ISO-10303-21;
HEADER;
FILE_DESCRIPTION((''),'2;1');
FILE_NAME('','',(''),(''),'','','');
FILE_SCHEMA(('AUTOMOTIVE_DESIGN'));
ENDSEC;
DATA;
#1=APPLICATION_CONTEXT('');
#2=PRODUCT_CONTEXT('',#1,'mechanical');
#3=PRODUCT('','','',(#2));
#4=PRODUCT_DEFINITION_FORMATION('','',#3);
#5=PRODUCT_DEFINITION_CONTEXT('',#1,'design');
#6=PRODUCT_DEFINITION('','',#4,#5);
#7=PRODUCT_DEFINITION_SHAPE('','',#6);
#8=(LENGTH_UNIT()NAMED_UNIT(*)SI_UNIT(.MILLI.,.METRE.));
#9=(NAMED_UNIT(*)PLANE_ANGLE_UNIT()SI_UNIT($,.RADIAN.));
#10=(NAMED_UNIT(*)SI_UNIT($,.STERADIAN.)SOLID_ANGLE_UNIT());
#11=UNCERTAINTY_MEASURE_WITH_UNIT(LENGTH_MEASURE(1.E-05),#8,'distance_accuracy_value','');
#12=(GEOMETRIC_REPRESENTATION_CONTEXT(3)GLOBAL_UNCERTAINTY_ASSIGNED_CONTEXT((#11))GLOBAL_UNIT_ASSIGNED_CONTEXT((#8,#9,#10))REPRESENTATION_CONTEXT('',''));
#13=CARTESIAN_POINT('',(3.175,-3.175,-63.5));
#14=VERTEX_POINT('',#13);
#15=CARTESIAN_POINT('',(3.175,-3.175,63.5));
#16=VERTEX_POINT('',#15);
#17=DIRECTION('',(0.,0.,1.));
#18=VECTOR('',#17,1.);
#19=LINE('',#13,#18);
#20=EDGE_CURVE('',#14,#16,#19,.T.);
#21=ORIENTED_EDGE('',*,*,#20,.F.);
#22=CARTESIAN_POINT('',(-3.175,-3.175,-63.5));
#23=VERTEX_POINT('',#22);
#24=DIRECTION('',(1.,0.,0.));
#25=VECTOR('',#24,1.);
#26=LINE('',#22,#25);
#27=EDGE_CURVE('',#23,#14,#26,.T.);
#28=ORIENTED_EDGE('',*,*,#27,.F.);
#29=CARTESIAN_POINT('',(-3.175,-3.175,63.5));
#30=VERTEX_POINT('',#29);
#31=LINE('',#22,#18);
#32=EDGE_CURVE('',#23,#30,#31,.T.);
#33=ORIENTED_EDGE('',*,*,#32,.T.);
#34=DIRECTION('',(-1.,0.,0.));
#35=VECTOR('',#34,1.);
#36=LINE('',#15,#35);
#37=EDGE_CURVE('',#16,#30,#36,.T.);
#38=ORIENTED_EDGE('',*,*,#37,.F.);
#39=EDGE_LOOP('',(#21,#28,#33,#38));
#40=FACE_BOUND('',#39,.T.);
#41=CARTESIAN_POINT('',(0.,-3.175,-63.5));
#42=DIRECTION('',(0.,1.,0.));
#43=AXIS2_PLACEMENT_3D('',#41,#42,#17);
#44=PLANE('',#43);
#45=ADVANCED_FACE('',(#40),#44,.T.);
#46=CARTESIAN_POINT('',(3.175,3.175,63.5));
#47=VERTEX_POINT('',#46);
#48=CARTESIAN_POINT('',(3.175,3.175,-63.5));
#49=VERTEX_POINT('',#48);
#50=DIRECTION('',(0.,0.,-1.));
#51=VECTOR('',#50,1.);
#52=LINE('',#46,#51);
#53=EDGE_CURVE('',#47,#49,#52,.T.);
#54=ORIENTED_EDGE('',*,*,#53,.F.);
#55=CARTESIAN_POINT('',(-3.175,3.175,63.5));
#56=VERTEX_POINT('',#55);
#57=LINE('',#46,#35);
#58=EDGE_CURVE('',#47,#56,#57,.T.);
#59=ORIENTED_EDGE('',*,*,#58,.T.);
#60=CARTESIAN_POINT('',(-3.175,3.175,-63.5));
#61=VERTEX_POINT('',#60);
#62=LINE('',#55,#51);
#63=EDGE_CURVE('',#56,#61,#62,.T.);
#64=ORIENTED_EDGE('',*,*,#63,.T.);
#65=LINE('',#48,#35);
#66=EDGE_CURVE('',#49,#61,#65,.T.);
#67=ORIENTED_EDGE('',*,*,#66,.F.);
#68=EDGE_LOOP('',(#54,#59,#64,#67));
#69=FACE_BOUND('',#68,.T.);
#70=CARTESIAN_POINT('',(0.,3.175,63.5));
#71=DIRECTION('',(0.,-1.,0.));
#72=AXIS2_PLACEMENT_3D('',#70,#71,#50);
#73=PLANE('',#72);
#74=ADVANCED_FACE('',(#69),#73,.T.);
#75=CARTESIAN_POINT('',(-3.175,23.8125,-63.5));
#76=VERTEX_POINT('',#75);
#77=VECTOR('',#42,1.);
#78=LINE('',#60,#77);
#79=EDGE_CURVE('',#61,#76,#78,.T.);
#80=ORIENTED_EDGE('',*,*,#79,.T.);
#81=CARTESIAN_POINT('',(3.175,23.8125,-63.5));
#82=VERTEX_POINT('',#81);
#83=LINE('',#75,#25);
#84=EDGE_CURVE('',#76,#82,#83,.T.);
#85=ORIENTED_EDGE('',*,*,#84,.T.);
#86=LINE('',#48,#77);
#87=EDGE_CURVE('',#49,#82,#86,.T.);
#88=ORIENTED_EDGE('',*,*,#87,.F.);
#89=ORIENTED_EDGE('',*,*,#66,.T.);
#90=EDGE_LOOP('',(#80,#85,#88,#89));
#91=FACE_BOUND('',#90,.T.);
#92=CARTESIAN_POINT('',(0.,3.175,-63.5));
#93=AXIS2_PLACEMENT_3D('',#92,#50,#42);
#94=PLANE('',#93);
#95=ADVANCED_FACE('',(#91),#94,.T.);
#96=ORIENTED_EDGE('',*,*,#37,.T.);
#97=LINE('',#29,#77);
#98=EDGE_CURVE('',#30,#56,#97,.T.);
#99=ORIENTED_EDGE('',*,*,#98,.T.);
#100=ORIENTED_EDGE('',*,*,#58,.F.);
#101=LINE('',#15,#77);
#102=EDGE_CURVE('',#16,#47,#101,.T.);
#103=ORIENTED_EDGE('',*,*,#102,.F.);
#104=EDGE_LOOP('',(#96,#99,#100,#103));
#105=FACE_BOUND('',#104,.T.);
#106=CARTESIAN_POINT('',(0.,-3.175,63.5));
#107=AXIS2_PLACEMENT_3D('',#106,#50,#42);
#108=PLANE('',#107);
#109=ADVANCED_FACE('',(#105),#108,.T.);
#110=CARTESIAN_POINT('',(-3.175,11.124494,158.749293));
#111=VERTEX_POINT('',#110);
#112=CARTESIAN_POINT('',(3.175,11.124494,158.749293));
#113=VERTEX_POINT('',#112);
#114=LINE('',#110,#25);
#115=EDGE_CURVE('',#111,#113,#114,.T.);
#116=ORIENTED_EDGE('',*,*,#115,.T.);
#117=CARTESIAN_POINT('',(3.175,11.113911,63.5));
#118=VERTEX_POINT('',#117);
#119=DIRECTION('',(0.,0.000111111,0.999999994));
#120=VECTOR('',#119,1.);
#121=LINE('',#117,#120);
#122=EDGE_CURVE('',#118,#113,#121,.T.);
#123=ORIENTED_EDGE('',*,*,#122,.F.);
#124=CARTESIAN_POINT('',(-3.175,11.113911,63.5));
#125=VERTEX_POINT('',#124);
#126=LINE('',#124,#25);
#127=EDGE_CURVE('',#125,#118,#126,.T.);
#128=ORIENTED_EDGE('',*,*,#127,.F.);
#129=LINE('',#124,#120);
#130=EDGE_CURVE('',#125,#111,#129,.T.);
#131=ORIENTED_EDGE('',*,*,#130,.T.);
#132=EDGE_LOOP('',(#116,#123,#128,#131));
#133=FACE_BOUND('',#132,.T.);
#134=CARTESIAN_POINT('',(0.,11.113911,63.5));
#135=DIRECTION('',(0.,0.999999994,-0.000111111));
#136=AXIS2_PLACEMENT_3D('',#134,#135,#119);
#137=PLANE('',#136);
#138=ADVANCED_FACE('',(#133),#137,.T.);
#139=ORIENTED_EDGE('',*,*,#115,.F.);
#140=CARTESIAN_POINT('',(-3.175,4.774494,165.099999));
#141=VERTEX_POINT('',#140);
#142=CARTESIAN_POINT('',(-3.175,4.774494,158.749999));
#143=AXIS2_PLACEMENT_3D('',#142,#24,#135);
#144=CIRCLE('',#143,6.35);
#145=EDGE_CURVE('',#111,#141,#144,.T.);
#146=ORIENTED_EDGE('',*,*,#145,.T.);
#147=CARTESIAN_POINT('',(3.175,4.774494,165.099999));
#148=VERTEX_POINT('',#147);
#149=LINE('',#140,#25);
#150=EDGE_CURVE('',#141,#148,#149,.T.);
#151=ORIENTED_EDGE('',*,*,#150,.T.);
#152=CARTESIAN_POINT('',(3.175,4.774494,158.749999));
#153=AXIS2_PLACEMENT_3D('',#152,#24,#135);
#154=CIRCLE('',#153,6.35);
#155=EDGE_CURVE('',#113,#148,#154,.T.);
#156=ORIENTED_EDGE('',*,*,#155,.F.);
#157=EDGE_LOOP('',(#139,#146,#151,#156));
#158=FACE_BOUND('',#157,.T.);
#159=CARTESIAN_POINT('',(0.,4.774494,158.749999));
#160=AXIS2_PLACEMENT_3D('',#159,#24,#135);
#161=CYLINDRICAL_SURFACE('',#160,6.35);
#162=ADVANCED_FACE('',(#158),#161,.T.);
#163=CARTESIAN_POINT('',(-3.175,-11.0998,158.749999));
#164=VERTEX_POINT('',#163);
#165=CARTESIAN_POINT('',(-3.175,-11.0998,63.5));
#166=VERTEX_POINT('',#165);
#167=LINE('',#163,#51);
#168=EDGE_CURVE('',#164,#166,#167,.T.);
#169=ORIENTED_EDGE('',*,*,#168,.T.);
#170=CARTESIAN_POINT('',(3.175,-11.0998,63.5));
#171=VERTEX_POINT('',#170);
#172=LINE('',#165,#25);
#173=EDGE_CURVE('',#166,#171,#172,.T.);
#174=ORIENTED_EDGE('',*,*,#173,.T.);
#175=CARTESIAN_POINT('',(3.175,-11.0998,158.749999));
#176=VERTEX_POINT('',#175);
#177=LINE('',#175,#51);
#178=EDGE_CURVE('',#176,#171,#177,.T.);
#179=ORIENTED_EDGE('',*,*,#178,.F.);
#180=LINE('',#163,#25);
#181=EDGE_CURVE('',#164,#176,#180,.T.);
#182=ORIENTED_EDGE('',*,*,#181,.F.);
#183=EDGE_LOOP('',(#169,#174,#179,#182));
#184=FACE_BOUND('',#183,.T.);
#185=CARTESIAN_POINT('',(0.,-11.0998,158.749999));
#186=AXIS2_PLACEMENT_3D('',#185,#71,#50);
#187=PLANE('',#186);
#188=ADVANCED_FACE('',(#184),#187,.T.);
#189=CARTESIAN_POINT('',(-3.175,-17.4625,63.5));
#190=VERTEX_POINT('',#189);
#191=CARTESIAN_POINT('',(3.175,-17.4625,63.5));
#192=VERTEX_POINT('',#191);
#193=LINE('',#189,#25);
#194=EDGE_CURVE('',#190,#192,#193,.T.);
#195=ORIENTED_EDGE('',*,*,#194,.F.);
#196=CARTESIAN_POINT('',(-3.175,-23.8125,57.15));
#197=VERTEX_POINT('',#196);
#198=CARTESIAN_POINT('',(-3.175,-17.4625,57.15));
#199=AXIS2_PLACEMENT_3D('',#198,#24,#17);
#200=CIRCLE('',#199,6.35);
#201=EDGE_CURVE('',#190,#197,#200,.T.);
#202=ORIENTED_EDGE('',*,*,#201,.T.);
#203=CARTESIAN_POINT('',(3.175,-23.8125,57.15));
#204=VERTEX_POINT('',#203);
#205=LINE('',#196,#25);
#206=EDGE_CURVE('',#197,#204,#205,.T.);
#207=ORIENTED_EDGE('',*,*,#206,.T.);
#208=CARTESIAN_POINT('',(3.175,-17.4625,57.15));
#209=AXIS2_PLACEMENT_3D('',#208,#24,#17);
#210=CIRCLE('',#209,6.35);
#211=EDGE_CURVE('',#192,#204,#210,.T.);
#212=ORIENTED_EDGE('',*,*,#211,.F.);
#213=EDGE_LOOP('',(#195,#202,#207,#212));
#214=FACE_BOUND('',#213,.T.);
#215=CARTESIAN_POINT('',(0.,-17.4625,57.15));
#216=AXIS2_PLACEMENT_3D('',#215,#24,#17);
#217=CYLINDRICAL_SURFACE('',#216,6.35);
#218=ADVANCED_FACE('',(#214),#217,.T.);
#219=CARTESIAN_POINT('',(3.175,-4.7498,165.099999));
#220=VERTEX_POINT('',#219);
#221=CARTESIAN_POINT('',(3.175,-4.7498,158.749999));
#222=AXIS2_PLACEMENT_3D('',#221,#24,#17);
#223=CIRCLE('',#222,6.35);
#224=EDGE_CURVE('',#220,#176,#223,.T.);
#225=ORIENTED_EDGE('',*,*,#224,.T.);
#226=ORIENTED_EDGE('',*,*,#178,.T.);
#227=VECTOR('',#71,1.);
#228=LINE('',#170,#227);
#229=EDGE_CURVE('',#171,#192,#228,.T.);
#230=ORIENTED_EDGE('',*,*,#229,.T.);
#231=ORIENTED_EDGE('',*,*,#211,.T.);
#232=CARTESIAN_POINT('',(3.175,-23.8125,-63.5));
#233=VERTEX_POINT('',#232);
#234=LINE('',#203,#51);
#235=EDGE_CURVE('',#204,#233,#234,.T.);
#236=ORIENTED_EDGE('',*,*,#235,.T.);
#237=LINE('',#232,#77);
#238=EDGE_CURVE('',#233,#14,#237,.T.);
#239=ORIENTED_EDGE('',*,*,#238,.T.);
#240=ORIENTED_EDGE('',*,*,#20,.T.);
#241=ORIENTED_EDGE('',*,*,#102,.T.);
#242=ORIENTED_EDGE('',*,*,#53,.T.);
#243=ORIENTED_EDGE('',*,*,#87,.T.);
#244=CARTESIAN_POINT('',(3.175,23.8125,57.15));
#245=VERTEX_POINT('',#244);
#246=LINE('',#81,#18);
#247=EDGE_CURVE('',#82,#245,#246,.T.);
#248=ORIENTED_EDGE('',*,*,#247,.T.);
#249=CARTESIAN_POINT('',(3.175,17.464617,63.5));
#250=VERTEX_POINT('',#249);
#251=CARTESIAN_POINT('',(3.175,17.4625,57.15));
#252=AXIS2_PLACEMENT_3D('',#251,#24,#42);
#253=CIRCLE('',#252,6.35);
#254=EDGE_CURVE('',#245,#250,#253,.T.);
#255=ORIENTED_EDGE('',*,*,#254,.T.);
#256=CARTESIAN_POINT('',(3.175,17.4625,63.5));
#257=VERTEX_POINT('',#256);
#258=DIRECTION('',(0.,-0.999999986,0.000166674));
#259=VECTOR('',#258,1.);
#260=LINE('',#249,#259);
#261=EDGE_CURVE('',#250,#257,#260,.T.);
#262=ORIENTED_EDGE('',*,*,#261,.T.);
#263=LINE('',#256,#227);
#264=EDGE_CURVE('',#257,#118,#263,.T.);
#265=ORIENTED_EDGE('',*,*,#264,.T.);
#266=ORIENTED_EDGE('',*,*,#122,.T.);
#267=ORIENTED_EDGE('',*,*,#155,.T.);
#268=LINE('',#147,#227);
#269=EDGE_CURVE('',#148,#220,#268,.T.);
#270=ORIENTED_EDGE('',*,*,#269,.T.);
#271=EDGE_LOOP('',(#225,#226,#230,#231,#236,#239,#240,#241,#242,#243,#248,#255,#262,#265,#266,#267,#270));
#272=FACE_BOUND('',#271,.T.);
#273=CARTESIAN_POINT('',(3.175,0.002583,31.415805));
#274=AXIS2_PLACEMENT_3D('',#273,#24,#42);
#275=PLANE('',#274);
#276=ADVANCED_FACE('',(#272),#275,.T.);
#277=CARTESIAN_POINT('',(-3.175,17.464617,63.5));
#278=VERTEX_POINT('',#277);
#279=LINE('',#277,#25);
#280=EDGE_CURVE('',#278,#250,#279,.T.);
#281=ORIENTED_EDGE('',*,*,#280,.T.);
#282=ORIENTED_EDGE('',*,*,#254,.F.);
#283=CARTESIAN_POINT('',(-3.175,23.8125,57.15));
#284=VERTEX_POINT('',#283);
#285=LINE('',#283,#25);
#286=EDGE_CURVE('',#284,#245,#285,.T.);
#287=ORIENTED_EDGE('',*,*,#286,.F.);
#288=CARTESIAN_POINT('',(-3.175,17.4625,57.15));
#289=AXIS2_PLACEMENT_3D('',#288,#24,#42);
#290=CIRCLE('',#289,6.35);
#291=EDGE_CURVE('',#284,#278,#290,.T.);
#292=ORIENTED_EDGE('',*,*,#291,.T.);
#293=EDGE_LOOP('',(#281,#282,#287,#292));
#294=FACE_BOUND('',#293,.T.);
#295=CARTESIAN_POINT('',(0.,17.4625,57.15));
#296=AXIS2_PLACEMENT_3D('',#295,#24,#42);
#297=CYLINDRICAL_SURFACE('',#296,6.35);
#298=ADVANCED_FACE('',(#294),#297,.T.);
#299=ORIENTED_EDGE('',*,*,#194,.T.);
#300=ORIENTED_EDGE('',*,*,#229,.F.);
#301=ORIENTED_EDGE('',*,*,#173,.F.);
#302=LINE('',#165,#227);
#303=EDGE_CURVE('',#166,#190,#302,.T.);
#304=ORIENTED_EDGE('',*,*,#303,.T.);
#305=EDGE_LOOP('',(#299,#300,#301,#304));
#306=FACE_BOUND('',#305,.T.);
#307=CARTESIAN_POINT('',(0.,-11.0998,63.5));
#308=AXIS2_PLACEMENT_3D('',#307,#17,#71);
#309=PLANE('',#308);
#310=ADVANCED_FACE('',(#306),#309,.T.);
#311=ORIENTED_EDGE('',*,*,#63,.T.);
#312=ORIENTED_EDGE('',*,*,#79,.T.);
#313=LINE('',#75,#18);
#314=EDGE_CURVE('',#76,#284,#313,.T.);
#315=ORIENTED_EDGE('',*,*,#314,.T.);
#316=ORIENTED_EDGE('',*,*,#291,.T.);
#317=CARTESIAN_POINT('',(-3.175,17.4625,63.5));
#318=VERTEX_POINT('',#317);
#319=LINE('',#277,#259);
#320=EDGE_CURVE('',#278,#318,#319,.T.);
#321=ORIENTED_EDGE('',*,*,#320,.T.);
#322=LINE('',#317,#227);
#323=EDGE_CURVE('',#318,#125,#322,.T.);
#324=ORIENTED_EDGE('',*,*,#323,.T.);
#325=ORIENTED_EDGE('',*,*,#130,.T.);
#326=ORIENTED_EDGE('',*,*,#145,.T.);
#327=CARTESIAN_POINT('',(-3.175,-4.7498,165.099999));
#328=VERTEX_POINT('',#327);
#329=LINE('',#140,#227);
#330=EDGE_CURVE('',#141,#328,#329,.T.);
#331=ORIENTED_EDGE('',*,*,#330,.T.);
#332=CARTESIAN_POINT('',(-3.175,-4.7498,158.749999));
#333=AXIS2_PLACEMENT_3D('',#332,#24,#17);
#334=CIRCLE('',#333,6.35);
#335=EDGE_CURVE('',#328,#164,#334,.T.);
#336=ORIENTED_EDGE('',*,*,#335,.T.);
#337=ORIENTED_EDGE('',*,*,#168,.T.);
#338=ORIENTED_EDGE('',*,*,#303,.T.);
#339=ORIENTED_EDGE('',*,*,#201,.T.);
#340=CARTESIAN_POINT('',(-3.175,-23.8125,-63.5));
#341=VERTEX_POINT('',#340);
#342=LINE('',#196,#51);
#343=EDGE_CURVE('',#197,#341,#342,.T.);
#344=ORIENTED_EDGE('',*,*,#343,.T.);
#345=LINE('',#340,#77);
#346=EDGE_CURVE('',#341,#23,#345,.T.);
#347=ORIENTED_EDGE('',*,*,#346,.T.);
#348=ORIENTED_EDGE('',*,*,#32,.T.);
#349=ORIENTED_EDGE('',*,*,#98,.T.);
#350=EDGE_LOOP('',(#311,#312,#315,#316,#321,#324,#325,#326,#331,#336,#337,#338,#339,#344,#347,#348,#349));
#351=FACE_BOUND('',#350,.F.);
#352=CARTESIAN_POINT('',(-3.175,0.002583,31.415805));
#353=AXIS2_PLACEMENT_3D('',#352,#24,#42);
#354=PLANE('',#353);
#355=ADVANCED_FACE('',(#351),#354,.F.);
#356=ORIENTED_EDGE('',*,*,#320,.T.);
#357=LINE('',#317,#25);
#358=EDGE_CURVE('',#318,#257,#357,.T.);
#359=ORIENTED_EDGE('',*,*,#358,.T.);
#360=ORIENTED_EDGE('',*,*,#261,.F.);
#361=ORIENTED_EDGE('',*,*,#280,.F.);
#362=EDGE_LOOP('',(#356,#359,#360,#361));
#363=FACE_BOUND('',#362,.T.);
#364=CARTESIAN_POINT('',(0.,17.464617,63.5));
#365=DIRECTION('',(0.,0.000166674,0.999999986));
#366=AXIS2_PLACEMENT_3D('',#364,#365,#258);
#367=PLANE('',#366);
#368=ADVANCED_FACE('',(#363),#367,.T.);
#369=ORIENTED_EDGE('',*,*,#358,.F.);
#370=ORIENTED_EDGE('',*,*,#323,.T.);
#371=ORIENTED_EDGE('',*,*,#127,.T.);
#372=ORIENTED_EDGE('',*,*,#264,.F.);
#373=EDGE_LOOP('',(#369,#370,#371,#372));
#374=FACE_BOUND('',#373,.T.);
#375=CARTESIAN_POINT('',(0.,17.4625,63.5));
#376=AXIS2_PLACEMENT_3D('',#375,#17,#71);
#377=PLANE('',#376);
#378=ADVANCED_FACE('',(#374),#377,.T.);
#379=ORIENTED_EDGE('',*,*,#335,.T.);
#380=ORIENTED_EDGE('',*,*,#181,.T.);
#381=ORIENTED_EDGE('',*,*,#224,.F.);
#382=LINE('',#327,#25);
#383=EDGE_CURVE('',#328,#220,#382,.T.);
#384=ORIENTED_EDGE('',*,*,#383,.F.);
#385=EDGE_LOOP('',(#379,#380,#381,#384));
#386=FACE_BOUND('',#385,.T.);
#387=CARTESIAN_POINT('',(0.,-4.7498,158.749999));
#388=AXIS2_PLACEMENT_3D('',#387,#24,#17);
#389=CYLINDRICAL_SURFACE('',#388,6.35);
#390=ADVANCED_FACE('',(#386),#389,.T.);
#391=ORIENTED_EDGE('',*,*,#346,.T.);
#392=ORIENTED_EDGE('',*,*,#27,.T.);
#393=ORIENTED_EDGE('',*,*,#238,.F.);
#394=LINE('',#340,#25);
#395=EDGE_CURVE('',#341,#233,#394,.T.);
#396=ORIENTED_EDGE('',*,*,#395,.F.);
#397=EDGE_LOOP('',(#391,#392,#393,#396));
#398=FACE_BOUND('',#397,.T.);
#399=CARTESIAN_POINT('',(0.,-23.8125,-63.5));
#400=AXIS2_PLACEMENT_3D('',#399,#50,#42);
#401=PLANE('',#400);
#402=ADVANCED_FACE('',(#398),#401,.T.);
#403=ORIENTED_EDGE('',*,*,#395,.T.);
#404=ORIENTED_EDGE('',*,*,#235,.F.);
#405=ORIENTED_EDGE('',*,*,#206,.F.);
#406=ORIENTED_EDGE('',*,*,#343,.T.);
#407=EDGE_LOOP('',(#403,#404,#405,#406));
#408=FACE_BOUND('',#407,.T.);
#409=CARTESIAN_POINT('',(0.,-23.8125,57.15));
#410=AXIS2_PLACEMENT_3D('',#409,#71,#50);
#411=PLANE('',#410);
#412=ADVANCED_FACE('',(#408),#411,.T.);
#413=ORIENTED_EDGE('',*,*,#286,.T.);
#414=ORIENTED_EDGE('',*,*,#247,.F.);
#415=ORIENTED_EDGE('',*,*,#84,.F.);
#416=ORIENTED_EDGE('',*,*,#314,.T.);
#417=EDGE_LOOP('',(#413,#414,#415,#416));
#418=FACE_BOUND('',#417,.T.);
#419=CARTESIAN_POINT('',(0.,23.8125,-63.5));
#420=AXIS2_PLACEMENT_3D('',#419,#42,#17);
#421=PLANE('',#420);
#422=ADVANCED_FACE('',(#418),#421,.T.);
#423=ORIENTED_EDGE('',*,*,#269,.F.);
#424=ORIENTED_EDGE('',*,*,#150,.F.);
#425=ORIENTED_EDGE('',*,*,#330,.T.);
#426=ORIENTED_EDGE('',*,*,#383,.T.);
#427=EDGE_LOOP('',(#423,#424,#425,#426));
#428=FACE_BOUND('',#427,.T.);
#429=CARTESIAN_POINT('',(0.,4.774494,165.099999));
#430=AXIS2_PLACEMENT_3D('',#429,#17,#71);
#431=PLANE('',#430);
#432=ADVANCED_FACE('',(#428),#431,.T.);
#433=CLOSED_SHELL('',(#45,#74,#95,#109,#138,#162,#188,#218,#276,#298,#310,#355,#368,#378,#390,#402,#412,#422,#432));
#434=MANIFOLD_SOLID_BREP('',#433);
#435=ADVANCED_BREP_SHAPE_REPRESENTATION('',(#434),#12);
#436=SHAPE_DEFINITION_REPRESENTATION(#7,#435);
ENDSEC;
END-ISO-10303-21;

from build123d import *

# Parameters (mm, degrees)
F1_DEPTH = 3.175


# Not quite as in the source:
# - ends of sketch curves that miss each other by under 0.0002 mm in the source are joined


with BuildPart() as f1:
    # F0 (on Right) → F1 (new body, symmetric)
    with BuildSketch(Plane.YZ):
        with BuildLine():
            Line((3.175, -63.5), (23.8125, -63.5))
            Line((23.8125, -63.5), (23.8125, 57.15))
            ThreePointArc((23.8125, 57.15), (21.9533763667, 61.6393796296), (17.4646167058, 63.4999996472))
            Line((17.4646167058, 63.4999996472), (17.4625, 63.5))
            Line((17.4625, 63.5), (11.1139111112, 63.5))
            Line((11.1139111112, 63.5), (11.124494366, 158.7492930333))
            ThreePointArc((11.124494366, 158.7492930333), (9.2648719104, 163.2398771909), (4.7744944052, 165.0999985889))
            Line((4.7744944052, 165.0999985889), (-4.7498, 165.0999985889))
            ThreePointArc((-4.7498, 165.0999985889), (-9.2399280605, 163.2401266494), (-11.0998, 158.7499985889))
            Line((-11.0998, 158.7499985889), (-11.0998, 63.5))
            Line((-11.0998, 63.5), (-17.4498, 63.5))
            Line((-17.4498, 63.5), (-17.4625, 63.5))
            ThreePointArc((-17.4625, 63.5), (-21.9526280605, 61.6401280605), (-23.8125, 57.15))
            Line((-23.8125, 57.15), (-23.8125, -63.5))
            Line((-23.8125, -63.5), (-3.175, -63.5))
            Line((-3.175, -63.5), (-3.175, 63.5))
            Line((-3.175, 63.5), (3.175, 63.5))
            Line((3.175, 63.5), (3.175, -63.5))
        make_face()
    extrude(amount=F1_DEPTH, both=True)


solid = f1.part
